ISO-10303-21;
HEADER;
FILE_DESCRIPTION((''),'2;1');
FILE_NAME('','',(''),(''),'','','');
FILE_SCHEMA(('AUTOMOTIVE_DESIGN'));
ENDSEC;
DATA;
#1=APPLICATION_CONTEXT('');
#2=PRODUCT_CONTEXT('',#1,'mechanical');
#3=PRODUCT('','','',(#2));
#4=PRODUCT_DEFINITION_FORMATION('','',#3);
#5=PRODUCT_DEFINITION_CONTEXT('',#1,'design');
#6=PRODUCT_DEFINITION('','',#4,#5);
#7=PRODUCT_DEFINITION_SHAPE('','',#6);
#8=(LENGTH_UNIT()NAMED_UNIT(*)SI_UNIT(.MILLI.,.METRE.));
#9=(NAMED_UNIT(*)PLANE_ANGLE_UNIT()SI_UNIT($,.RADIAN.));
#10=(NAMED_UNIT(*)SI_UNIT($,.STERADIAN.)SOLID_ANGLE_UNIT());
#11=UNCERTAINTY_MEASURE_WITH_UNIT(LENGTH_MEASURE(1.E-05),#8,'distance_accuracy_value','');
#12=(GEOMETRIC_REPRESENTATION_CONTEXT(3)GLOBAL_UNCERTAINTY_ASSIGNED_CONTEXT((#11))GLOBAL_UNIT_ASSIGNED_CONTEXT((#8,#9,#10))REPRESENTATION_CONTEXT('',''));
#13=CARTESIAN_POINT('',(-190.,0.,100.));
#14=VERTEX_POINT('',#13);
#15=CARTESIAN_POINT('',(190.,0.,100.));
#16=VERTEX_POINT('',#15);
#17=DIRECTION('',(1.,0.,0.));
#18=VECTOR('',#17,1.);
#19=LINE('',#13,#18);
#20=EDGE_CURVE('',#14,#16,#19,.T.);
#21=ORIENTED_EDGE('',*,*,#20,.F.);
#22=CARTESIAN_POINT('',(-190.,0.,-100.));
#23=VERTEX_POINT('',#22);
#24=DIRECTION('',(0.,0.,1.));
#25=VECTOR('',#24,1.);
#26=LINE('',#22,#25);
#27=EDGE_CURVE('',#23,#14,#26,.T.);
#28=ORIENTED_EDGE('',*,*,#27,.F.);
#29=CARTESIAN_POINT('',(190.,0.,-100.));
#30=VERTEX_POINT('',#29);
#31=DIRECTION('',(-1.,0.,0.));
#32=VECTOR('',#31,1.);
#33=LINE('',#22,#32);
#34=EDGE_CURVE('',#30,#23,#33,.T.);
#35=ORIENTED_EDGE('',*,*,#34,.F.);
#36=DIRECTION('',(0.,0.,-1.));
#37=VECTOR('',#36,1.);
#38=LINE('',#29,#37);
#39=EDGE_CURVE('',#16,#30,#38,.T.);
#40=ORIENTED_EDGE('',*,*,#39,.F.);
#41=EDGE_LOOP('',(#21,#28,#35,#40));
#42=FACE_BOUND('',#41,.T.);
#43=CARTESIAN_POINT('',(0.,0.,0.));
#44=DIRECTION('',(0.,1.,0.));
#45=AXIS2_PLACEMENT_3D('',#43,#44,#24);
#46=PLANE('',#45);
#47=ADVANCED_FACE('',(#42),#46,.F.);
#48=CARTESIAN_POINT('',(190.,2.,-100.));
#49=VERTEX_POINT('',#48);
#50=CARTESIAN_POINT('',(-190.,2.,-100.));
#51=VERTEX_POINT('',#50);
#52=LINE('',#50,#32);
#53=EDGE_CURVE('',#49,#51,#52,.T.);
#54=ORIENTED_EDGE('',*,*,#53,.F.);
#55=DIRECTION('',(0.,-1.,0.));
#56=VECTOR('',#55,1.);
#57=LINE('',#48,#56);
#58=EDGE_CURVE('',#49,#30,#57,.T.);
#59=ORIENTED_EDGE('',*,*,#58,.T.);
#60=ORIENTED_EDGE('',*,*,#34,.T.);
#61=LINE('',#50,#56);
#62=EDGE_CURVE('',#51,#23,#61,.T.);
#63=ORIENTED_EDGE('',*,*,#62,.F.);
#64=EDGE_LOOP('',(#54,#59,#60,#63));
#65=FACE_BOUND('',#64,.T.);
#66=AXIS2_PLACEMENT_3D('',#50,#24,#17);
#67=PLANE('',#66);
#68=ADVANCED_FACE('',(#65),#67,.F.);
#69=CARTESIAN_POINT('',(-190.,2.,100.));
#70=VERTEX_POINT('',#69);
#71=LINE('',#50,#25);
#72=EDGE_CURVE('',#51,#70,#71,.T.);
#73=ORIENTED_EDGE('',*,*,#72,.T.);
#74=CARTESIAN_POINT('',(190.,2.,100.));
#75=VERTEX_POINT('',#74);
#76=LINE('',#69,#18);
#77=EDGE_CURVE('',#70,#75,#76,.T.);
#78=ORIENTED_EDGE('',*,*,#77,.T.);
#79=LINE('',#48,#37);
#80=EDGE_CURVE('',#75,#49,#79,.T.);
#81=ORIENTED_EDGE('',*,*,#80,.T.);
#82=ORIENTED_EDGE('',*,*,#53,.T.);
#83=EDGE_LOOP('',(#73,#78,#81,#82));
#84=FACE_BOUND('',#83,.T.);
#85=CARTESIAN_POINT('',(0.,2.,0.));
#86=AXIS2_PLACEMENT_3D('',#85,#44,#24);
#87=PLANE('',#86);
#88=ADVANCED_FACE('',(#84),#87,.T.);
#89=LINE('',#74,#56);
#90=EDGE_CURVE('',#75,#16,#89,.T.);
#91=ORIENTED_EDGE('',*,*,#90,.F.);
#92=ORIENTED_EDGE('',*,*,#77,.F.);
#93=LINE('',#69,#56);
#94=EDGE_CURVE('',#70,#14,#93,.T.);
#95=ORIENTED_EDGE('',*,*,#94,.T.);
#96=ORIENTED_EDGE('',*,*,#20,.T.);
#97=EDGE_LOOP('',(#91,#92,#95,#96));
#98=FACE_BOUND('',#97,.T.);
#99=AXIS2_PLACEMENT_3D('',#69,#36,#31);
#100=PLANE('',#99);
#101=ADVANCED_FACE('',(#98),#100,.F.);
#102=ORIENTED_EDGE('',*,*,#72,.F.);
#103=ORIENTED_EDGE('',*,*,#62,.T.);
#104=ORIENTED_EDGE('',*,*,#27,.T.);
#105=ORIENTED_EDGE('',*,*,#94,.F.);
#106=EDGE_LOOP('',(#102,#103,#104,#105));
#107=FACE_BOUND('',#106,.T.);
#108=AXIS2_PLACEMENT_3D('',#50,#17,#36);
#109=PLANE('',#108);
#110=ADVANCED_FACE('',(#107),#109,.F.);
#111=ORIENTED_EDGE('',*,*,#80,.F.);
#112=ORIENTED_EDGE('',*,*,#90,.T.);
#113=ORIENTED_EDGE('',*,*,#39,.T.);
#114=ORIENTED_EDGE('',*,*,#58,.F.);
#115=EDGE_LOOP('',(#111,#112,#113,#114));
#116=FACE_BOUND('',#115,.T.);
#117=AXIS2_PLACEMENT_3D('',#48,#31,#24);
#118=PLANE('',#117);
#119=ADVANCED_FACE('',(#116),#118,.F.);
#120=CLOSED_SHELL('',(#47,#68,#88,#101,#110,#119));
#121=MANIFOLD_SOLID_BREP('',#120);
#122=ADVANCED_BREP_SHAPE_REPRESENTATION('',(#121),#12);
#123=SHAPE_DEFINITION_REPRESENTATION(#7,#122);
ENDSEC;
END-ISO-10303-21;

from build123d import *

# Parameters (mm, degrees)
SKETCH1_W          = 380
SKETCH1_H          = 200
BASE_FLANGE1_DEPTH = 2


# Sheet-metal steps are written as plain solids
with BuildPart() as part:
    # Sketch1 → Base-Flange1 (new body)
    with BuildSketch(Plane(origin=(0, 0, 0), x_dir=(1, 0, 0), z_dir=(0, 1, 0))):
        Rectangle(SKETCH1_W, SKETCH1_H)
    extrude(amount=BASE_FLANGE1_DEPTH)


solid = part.part
